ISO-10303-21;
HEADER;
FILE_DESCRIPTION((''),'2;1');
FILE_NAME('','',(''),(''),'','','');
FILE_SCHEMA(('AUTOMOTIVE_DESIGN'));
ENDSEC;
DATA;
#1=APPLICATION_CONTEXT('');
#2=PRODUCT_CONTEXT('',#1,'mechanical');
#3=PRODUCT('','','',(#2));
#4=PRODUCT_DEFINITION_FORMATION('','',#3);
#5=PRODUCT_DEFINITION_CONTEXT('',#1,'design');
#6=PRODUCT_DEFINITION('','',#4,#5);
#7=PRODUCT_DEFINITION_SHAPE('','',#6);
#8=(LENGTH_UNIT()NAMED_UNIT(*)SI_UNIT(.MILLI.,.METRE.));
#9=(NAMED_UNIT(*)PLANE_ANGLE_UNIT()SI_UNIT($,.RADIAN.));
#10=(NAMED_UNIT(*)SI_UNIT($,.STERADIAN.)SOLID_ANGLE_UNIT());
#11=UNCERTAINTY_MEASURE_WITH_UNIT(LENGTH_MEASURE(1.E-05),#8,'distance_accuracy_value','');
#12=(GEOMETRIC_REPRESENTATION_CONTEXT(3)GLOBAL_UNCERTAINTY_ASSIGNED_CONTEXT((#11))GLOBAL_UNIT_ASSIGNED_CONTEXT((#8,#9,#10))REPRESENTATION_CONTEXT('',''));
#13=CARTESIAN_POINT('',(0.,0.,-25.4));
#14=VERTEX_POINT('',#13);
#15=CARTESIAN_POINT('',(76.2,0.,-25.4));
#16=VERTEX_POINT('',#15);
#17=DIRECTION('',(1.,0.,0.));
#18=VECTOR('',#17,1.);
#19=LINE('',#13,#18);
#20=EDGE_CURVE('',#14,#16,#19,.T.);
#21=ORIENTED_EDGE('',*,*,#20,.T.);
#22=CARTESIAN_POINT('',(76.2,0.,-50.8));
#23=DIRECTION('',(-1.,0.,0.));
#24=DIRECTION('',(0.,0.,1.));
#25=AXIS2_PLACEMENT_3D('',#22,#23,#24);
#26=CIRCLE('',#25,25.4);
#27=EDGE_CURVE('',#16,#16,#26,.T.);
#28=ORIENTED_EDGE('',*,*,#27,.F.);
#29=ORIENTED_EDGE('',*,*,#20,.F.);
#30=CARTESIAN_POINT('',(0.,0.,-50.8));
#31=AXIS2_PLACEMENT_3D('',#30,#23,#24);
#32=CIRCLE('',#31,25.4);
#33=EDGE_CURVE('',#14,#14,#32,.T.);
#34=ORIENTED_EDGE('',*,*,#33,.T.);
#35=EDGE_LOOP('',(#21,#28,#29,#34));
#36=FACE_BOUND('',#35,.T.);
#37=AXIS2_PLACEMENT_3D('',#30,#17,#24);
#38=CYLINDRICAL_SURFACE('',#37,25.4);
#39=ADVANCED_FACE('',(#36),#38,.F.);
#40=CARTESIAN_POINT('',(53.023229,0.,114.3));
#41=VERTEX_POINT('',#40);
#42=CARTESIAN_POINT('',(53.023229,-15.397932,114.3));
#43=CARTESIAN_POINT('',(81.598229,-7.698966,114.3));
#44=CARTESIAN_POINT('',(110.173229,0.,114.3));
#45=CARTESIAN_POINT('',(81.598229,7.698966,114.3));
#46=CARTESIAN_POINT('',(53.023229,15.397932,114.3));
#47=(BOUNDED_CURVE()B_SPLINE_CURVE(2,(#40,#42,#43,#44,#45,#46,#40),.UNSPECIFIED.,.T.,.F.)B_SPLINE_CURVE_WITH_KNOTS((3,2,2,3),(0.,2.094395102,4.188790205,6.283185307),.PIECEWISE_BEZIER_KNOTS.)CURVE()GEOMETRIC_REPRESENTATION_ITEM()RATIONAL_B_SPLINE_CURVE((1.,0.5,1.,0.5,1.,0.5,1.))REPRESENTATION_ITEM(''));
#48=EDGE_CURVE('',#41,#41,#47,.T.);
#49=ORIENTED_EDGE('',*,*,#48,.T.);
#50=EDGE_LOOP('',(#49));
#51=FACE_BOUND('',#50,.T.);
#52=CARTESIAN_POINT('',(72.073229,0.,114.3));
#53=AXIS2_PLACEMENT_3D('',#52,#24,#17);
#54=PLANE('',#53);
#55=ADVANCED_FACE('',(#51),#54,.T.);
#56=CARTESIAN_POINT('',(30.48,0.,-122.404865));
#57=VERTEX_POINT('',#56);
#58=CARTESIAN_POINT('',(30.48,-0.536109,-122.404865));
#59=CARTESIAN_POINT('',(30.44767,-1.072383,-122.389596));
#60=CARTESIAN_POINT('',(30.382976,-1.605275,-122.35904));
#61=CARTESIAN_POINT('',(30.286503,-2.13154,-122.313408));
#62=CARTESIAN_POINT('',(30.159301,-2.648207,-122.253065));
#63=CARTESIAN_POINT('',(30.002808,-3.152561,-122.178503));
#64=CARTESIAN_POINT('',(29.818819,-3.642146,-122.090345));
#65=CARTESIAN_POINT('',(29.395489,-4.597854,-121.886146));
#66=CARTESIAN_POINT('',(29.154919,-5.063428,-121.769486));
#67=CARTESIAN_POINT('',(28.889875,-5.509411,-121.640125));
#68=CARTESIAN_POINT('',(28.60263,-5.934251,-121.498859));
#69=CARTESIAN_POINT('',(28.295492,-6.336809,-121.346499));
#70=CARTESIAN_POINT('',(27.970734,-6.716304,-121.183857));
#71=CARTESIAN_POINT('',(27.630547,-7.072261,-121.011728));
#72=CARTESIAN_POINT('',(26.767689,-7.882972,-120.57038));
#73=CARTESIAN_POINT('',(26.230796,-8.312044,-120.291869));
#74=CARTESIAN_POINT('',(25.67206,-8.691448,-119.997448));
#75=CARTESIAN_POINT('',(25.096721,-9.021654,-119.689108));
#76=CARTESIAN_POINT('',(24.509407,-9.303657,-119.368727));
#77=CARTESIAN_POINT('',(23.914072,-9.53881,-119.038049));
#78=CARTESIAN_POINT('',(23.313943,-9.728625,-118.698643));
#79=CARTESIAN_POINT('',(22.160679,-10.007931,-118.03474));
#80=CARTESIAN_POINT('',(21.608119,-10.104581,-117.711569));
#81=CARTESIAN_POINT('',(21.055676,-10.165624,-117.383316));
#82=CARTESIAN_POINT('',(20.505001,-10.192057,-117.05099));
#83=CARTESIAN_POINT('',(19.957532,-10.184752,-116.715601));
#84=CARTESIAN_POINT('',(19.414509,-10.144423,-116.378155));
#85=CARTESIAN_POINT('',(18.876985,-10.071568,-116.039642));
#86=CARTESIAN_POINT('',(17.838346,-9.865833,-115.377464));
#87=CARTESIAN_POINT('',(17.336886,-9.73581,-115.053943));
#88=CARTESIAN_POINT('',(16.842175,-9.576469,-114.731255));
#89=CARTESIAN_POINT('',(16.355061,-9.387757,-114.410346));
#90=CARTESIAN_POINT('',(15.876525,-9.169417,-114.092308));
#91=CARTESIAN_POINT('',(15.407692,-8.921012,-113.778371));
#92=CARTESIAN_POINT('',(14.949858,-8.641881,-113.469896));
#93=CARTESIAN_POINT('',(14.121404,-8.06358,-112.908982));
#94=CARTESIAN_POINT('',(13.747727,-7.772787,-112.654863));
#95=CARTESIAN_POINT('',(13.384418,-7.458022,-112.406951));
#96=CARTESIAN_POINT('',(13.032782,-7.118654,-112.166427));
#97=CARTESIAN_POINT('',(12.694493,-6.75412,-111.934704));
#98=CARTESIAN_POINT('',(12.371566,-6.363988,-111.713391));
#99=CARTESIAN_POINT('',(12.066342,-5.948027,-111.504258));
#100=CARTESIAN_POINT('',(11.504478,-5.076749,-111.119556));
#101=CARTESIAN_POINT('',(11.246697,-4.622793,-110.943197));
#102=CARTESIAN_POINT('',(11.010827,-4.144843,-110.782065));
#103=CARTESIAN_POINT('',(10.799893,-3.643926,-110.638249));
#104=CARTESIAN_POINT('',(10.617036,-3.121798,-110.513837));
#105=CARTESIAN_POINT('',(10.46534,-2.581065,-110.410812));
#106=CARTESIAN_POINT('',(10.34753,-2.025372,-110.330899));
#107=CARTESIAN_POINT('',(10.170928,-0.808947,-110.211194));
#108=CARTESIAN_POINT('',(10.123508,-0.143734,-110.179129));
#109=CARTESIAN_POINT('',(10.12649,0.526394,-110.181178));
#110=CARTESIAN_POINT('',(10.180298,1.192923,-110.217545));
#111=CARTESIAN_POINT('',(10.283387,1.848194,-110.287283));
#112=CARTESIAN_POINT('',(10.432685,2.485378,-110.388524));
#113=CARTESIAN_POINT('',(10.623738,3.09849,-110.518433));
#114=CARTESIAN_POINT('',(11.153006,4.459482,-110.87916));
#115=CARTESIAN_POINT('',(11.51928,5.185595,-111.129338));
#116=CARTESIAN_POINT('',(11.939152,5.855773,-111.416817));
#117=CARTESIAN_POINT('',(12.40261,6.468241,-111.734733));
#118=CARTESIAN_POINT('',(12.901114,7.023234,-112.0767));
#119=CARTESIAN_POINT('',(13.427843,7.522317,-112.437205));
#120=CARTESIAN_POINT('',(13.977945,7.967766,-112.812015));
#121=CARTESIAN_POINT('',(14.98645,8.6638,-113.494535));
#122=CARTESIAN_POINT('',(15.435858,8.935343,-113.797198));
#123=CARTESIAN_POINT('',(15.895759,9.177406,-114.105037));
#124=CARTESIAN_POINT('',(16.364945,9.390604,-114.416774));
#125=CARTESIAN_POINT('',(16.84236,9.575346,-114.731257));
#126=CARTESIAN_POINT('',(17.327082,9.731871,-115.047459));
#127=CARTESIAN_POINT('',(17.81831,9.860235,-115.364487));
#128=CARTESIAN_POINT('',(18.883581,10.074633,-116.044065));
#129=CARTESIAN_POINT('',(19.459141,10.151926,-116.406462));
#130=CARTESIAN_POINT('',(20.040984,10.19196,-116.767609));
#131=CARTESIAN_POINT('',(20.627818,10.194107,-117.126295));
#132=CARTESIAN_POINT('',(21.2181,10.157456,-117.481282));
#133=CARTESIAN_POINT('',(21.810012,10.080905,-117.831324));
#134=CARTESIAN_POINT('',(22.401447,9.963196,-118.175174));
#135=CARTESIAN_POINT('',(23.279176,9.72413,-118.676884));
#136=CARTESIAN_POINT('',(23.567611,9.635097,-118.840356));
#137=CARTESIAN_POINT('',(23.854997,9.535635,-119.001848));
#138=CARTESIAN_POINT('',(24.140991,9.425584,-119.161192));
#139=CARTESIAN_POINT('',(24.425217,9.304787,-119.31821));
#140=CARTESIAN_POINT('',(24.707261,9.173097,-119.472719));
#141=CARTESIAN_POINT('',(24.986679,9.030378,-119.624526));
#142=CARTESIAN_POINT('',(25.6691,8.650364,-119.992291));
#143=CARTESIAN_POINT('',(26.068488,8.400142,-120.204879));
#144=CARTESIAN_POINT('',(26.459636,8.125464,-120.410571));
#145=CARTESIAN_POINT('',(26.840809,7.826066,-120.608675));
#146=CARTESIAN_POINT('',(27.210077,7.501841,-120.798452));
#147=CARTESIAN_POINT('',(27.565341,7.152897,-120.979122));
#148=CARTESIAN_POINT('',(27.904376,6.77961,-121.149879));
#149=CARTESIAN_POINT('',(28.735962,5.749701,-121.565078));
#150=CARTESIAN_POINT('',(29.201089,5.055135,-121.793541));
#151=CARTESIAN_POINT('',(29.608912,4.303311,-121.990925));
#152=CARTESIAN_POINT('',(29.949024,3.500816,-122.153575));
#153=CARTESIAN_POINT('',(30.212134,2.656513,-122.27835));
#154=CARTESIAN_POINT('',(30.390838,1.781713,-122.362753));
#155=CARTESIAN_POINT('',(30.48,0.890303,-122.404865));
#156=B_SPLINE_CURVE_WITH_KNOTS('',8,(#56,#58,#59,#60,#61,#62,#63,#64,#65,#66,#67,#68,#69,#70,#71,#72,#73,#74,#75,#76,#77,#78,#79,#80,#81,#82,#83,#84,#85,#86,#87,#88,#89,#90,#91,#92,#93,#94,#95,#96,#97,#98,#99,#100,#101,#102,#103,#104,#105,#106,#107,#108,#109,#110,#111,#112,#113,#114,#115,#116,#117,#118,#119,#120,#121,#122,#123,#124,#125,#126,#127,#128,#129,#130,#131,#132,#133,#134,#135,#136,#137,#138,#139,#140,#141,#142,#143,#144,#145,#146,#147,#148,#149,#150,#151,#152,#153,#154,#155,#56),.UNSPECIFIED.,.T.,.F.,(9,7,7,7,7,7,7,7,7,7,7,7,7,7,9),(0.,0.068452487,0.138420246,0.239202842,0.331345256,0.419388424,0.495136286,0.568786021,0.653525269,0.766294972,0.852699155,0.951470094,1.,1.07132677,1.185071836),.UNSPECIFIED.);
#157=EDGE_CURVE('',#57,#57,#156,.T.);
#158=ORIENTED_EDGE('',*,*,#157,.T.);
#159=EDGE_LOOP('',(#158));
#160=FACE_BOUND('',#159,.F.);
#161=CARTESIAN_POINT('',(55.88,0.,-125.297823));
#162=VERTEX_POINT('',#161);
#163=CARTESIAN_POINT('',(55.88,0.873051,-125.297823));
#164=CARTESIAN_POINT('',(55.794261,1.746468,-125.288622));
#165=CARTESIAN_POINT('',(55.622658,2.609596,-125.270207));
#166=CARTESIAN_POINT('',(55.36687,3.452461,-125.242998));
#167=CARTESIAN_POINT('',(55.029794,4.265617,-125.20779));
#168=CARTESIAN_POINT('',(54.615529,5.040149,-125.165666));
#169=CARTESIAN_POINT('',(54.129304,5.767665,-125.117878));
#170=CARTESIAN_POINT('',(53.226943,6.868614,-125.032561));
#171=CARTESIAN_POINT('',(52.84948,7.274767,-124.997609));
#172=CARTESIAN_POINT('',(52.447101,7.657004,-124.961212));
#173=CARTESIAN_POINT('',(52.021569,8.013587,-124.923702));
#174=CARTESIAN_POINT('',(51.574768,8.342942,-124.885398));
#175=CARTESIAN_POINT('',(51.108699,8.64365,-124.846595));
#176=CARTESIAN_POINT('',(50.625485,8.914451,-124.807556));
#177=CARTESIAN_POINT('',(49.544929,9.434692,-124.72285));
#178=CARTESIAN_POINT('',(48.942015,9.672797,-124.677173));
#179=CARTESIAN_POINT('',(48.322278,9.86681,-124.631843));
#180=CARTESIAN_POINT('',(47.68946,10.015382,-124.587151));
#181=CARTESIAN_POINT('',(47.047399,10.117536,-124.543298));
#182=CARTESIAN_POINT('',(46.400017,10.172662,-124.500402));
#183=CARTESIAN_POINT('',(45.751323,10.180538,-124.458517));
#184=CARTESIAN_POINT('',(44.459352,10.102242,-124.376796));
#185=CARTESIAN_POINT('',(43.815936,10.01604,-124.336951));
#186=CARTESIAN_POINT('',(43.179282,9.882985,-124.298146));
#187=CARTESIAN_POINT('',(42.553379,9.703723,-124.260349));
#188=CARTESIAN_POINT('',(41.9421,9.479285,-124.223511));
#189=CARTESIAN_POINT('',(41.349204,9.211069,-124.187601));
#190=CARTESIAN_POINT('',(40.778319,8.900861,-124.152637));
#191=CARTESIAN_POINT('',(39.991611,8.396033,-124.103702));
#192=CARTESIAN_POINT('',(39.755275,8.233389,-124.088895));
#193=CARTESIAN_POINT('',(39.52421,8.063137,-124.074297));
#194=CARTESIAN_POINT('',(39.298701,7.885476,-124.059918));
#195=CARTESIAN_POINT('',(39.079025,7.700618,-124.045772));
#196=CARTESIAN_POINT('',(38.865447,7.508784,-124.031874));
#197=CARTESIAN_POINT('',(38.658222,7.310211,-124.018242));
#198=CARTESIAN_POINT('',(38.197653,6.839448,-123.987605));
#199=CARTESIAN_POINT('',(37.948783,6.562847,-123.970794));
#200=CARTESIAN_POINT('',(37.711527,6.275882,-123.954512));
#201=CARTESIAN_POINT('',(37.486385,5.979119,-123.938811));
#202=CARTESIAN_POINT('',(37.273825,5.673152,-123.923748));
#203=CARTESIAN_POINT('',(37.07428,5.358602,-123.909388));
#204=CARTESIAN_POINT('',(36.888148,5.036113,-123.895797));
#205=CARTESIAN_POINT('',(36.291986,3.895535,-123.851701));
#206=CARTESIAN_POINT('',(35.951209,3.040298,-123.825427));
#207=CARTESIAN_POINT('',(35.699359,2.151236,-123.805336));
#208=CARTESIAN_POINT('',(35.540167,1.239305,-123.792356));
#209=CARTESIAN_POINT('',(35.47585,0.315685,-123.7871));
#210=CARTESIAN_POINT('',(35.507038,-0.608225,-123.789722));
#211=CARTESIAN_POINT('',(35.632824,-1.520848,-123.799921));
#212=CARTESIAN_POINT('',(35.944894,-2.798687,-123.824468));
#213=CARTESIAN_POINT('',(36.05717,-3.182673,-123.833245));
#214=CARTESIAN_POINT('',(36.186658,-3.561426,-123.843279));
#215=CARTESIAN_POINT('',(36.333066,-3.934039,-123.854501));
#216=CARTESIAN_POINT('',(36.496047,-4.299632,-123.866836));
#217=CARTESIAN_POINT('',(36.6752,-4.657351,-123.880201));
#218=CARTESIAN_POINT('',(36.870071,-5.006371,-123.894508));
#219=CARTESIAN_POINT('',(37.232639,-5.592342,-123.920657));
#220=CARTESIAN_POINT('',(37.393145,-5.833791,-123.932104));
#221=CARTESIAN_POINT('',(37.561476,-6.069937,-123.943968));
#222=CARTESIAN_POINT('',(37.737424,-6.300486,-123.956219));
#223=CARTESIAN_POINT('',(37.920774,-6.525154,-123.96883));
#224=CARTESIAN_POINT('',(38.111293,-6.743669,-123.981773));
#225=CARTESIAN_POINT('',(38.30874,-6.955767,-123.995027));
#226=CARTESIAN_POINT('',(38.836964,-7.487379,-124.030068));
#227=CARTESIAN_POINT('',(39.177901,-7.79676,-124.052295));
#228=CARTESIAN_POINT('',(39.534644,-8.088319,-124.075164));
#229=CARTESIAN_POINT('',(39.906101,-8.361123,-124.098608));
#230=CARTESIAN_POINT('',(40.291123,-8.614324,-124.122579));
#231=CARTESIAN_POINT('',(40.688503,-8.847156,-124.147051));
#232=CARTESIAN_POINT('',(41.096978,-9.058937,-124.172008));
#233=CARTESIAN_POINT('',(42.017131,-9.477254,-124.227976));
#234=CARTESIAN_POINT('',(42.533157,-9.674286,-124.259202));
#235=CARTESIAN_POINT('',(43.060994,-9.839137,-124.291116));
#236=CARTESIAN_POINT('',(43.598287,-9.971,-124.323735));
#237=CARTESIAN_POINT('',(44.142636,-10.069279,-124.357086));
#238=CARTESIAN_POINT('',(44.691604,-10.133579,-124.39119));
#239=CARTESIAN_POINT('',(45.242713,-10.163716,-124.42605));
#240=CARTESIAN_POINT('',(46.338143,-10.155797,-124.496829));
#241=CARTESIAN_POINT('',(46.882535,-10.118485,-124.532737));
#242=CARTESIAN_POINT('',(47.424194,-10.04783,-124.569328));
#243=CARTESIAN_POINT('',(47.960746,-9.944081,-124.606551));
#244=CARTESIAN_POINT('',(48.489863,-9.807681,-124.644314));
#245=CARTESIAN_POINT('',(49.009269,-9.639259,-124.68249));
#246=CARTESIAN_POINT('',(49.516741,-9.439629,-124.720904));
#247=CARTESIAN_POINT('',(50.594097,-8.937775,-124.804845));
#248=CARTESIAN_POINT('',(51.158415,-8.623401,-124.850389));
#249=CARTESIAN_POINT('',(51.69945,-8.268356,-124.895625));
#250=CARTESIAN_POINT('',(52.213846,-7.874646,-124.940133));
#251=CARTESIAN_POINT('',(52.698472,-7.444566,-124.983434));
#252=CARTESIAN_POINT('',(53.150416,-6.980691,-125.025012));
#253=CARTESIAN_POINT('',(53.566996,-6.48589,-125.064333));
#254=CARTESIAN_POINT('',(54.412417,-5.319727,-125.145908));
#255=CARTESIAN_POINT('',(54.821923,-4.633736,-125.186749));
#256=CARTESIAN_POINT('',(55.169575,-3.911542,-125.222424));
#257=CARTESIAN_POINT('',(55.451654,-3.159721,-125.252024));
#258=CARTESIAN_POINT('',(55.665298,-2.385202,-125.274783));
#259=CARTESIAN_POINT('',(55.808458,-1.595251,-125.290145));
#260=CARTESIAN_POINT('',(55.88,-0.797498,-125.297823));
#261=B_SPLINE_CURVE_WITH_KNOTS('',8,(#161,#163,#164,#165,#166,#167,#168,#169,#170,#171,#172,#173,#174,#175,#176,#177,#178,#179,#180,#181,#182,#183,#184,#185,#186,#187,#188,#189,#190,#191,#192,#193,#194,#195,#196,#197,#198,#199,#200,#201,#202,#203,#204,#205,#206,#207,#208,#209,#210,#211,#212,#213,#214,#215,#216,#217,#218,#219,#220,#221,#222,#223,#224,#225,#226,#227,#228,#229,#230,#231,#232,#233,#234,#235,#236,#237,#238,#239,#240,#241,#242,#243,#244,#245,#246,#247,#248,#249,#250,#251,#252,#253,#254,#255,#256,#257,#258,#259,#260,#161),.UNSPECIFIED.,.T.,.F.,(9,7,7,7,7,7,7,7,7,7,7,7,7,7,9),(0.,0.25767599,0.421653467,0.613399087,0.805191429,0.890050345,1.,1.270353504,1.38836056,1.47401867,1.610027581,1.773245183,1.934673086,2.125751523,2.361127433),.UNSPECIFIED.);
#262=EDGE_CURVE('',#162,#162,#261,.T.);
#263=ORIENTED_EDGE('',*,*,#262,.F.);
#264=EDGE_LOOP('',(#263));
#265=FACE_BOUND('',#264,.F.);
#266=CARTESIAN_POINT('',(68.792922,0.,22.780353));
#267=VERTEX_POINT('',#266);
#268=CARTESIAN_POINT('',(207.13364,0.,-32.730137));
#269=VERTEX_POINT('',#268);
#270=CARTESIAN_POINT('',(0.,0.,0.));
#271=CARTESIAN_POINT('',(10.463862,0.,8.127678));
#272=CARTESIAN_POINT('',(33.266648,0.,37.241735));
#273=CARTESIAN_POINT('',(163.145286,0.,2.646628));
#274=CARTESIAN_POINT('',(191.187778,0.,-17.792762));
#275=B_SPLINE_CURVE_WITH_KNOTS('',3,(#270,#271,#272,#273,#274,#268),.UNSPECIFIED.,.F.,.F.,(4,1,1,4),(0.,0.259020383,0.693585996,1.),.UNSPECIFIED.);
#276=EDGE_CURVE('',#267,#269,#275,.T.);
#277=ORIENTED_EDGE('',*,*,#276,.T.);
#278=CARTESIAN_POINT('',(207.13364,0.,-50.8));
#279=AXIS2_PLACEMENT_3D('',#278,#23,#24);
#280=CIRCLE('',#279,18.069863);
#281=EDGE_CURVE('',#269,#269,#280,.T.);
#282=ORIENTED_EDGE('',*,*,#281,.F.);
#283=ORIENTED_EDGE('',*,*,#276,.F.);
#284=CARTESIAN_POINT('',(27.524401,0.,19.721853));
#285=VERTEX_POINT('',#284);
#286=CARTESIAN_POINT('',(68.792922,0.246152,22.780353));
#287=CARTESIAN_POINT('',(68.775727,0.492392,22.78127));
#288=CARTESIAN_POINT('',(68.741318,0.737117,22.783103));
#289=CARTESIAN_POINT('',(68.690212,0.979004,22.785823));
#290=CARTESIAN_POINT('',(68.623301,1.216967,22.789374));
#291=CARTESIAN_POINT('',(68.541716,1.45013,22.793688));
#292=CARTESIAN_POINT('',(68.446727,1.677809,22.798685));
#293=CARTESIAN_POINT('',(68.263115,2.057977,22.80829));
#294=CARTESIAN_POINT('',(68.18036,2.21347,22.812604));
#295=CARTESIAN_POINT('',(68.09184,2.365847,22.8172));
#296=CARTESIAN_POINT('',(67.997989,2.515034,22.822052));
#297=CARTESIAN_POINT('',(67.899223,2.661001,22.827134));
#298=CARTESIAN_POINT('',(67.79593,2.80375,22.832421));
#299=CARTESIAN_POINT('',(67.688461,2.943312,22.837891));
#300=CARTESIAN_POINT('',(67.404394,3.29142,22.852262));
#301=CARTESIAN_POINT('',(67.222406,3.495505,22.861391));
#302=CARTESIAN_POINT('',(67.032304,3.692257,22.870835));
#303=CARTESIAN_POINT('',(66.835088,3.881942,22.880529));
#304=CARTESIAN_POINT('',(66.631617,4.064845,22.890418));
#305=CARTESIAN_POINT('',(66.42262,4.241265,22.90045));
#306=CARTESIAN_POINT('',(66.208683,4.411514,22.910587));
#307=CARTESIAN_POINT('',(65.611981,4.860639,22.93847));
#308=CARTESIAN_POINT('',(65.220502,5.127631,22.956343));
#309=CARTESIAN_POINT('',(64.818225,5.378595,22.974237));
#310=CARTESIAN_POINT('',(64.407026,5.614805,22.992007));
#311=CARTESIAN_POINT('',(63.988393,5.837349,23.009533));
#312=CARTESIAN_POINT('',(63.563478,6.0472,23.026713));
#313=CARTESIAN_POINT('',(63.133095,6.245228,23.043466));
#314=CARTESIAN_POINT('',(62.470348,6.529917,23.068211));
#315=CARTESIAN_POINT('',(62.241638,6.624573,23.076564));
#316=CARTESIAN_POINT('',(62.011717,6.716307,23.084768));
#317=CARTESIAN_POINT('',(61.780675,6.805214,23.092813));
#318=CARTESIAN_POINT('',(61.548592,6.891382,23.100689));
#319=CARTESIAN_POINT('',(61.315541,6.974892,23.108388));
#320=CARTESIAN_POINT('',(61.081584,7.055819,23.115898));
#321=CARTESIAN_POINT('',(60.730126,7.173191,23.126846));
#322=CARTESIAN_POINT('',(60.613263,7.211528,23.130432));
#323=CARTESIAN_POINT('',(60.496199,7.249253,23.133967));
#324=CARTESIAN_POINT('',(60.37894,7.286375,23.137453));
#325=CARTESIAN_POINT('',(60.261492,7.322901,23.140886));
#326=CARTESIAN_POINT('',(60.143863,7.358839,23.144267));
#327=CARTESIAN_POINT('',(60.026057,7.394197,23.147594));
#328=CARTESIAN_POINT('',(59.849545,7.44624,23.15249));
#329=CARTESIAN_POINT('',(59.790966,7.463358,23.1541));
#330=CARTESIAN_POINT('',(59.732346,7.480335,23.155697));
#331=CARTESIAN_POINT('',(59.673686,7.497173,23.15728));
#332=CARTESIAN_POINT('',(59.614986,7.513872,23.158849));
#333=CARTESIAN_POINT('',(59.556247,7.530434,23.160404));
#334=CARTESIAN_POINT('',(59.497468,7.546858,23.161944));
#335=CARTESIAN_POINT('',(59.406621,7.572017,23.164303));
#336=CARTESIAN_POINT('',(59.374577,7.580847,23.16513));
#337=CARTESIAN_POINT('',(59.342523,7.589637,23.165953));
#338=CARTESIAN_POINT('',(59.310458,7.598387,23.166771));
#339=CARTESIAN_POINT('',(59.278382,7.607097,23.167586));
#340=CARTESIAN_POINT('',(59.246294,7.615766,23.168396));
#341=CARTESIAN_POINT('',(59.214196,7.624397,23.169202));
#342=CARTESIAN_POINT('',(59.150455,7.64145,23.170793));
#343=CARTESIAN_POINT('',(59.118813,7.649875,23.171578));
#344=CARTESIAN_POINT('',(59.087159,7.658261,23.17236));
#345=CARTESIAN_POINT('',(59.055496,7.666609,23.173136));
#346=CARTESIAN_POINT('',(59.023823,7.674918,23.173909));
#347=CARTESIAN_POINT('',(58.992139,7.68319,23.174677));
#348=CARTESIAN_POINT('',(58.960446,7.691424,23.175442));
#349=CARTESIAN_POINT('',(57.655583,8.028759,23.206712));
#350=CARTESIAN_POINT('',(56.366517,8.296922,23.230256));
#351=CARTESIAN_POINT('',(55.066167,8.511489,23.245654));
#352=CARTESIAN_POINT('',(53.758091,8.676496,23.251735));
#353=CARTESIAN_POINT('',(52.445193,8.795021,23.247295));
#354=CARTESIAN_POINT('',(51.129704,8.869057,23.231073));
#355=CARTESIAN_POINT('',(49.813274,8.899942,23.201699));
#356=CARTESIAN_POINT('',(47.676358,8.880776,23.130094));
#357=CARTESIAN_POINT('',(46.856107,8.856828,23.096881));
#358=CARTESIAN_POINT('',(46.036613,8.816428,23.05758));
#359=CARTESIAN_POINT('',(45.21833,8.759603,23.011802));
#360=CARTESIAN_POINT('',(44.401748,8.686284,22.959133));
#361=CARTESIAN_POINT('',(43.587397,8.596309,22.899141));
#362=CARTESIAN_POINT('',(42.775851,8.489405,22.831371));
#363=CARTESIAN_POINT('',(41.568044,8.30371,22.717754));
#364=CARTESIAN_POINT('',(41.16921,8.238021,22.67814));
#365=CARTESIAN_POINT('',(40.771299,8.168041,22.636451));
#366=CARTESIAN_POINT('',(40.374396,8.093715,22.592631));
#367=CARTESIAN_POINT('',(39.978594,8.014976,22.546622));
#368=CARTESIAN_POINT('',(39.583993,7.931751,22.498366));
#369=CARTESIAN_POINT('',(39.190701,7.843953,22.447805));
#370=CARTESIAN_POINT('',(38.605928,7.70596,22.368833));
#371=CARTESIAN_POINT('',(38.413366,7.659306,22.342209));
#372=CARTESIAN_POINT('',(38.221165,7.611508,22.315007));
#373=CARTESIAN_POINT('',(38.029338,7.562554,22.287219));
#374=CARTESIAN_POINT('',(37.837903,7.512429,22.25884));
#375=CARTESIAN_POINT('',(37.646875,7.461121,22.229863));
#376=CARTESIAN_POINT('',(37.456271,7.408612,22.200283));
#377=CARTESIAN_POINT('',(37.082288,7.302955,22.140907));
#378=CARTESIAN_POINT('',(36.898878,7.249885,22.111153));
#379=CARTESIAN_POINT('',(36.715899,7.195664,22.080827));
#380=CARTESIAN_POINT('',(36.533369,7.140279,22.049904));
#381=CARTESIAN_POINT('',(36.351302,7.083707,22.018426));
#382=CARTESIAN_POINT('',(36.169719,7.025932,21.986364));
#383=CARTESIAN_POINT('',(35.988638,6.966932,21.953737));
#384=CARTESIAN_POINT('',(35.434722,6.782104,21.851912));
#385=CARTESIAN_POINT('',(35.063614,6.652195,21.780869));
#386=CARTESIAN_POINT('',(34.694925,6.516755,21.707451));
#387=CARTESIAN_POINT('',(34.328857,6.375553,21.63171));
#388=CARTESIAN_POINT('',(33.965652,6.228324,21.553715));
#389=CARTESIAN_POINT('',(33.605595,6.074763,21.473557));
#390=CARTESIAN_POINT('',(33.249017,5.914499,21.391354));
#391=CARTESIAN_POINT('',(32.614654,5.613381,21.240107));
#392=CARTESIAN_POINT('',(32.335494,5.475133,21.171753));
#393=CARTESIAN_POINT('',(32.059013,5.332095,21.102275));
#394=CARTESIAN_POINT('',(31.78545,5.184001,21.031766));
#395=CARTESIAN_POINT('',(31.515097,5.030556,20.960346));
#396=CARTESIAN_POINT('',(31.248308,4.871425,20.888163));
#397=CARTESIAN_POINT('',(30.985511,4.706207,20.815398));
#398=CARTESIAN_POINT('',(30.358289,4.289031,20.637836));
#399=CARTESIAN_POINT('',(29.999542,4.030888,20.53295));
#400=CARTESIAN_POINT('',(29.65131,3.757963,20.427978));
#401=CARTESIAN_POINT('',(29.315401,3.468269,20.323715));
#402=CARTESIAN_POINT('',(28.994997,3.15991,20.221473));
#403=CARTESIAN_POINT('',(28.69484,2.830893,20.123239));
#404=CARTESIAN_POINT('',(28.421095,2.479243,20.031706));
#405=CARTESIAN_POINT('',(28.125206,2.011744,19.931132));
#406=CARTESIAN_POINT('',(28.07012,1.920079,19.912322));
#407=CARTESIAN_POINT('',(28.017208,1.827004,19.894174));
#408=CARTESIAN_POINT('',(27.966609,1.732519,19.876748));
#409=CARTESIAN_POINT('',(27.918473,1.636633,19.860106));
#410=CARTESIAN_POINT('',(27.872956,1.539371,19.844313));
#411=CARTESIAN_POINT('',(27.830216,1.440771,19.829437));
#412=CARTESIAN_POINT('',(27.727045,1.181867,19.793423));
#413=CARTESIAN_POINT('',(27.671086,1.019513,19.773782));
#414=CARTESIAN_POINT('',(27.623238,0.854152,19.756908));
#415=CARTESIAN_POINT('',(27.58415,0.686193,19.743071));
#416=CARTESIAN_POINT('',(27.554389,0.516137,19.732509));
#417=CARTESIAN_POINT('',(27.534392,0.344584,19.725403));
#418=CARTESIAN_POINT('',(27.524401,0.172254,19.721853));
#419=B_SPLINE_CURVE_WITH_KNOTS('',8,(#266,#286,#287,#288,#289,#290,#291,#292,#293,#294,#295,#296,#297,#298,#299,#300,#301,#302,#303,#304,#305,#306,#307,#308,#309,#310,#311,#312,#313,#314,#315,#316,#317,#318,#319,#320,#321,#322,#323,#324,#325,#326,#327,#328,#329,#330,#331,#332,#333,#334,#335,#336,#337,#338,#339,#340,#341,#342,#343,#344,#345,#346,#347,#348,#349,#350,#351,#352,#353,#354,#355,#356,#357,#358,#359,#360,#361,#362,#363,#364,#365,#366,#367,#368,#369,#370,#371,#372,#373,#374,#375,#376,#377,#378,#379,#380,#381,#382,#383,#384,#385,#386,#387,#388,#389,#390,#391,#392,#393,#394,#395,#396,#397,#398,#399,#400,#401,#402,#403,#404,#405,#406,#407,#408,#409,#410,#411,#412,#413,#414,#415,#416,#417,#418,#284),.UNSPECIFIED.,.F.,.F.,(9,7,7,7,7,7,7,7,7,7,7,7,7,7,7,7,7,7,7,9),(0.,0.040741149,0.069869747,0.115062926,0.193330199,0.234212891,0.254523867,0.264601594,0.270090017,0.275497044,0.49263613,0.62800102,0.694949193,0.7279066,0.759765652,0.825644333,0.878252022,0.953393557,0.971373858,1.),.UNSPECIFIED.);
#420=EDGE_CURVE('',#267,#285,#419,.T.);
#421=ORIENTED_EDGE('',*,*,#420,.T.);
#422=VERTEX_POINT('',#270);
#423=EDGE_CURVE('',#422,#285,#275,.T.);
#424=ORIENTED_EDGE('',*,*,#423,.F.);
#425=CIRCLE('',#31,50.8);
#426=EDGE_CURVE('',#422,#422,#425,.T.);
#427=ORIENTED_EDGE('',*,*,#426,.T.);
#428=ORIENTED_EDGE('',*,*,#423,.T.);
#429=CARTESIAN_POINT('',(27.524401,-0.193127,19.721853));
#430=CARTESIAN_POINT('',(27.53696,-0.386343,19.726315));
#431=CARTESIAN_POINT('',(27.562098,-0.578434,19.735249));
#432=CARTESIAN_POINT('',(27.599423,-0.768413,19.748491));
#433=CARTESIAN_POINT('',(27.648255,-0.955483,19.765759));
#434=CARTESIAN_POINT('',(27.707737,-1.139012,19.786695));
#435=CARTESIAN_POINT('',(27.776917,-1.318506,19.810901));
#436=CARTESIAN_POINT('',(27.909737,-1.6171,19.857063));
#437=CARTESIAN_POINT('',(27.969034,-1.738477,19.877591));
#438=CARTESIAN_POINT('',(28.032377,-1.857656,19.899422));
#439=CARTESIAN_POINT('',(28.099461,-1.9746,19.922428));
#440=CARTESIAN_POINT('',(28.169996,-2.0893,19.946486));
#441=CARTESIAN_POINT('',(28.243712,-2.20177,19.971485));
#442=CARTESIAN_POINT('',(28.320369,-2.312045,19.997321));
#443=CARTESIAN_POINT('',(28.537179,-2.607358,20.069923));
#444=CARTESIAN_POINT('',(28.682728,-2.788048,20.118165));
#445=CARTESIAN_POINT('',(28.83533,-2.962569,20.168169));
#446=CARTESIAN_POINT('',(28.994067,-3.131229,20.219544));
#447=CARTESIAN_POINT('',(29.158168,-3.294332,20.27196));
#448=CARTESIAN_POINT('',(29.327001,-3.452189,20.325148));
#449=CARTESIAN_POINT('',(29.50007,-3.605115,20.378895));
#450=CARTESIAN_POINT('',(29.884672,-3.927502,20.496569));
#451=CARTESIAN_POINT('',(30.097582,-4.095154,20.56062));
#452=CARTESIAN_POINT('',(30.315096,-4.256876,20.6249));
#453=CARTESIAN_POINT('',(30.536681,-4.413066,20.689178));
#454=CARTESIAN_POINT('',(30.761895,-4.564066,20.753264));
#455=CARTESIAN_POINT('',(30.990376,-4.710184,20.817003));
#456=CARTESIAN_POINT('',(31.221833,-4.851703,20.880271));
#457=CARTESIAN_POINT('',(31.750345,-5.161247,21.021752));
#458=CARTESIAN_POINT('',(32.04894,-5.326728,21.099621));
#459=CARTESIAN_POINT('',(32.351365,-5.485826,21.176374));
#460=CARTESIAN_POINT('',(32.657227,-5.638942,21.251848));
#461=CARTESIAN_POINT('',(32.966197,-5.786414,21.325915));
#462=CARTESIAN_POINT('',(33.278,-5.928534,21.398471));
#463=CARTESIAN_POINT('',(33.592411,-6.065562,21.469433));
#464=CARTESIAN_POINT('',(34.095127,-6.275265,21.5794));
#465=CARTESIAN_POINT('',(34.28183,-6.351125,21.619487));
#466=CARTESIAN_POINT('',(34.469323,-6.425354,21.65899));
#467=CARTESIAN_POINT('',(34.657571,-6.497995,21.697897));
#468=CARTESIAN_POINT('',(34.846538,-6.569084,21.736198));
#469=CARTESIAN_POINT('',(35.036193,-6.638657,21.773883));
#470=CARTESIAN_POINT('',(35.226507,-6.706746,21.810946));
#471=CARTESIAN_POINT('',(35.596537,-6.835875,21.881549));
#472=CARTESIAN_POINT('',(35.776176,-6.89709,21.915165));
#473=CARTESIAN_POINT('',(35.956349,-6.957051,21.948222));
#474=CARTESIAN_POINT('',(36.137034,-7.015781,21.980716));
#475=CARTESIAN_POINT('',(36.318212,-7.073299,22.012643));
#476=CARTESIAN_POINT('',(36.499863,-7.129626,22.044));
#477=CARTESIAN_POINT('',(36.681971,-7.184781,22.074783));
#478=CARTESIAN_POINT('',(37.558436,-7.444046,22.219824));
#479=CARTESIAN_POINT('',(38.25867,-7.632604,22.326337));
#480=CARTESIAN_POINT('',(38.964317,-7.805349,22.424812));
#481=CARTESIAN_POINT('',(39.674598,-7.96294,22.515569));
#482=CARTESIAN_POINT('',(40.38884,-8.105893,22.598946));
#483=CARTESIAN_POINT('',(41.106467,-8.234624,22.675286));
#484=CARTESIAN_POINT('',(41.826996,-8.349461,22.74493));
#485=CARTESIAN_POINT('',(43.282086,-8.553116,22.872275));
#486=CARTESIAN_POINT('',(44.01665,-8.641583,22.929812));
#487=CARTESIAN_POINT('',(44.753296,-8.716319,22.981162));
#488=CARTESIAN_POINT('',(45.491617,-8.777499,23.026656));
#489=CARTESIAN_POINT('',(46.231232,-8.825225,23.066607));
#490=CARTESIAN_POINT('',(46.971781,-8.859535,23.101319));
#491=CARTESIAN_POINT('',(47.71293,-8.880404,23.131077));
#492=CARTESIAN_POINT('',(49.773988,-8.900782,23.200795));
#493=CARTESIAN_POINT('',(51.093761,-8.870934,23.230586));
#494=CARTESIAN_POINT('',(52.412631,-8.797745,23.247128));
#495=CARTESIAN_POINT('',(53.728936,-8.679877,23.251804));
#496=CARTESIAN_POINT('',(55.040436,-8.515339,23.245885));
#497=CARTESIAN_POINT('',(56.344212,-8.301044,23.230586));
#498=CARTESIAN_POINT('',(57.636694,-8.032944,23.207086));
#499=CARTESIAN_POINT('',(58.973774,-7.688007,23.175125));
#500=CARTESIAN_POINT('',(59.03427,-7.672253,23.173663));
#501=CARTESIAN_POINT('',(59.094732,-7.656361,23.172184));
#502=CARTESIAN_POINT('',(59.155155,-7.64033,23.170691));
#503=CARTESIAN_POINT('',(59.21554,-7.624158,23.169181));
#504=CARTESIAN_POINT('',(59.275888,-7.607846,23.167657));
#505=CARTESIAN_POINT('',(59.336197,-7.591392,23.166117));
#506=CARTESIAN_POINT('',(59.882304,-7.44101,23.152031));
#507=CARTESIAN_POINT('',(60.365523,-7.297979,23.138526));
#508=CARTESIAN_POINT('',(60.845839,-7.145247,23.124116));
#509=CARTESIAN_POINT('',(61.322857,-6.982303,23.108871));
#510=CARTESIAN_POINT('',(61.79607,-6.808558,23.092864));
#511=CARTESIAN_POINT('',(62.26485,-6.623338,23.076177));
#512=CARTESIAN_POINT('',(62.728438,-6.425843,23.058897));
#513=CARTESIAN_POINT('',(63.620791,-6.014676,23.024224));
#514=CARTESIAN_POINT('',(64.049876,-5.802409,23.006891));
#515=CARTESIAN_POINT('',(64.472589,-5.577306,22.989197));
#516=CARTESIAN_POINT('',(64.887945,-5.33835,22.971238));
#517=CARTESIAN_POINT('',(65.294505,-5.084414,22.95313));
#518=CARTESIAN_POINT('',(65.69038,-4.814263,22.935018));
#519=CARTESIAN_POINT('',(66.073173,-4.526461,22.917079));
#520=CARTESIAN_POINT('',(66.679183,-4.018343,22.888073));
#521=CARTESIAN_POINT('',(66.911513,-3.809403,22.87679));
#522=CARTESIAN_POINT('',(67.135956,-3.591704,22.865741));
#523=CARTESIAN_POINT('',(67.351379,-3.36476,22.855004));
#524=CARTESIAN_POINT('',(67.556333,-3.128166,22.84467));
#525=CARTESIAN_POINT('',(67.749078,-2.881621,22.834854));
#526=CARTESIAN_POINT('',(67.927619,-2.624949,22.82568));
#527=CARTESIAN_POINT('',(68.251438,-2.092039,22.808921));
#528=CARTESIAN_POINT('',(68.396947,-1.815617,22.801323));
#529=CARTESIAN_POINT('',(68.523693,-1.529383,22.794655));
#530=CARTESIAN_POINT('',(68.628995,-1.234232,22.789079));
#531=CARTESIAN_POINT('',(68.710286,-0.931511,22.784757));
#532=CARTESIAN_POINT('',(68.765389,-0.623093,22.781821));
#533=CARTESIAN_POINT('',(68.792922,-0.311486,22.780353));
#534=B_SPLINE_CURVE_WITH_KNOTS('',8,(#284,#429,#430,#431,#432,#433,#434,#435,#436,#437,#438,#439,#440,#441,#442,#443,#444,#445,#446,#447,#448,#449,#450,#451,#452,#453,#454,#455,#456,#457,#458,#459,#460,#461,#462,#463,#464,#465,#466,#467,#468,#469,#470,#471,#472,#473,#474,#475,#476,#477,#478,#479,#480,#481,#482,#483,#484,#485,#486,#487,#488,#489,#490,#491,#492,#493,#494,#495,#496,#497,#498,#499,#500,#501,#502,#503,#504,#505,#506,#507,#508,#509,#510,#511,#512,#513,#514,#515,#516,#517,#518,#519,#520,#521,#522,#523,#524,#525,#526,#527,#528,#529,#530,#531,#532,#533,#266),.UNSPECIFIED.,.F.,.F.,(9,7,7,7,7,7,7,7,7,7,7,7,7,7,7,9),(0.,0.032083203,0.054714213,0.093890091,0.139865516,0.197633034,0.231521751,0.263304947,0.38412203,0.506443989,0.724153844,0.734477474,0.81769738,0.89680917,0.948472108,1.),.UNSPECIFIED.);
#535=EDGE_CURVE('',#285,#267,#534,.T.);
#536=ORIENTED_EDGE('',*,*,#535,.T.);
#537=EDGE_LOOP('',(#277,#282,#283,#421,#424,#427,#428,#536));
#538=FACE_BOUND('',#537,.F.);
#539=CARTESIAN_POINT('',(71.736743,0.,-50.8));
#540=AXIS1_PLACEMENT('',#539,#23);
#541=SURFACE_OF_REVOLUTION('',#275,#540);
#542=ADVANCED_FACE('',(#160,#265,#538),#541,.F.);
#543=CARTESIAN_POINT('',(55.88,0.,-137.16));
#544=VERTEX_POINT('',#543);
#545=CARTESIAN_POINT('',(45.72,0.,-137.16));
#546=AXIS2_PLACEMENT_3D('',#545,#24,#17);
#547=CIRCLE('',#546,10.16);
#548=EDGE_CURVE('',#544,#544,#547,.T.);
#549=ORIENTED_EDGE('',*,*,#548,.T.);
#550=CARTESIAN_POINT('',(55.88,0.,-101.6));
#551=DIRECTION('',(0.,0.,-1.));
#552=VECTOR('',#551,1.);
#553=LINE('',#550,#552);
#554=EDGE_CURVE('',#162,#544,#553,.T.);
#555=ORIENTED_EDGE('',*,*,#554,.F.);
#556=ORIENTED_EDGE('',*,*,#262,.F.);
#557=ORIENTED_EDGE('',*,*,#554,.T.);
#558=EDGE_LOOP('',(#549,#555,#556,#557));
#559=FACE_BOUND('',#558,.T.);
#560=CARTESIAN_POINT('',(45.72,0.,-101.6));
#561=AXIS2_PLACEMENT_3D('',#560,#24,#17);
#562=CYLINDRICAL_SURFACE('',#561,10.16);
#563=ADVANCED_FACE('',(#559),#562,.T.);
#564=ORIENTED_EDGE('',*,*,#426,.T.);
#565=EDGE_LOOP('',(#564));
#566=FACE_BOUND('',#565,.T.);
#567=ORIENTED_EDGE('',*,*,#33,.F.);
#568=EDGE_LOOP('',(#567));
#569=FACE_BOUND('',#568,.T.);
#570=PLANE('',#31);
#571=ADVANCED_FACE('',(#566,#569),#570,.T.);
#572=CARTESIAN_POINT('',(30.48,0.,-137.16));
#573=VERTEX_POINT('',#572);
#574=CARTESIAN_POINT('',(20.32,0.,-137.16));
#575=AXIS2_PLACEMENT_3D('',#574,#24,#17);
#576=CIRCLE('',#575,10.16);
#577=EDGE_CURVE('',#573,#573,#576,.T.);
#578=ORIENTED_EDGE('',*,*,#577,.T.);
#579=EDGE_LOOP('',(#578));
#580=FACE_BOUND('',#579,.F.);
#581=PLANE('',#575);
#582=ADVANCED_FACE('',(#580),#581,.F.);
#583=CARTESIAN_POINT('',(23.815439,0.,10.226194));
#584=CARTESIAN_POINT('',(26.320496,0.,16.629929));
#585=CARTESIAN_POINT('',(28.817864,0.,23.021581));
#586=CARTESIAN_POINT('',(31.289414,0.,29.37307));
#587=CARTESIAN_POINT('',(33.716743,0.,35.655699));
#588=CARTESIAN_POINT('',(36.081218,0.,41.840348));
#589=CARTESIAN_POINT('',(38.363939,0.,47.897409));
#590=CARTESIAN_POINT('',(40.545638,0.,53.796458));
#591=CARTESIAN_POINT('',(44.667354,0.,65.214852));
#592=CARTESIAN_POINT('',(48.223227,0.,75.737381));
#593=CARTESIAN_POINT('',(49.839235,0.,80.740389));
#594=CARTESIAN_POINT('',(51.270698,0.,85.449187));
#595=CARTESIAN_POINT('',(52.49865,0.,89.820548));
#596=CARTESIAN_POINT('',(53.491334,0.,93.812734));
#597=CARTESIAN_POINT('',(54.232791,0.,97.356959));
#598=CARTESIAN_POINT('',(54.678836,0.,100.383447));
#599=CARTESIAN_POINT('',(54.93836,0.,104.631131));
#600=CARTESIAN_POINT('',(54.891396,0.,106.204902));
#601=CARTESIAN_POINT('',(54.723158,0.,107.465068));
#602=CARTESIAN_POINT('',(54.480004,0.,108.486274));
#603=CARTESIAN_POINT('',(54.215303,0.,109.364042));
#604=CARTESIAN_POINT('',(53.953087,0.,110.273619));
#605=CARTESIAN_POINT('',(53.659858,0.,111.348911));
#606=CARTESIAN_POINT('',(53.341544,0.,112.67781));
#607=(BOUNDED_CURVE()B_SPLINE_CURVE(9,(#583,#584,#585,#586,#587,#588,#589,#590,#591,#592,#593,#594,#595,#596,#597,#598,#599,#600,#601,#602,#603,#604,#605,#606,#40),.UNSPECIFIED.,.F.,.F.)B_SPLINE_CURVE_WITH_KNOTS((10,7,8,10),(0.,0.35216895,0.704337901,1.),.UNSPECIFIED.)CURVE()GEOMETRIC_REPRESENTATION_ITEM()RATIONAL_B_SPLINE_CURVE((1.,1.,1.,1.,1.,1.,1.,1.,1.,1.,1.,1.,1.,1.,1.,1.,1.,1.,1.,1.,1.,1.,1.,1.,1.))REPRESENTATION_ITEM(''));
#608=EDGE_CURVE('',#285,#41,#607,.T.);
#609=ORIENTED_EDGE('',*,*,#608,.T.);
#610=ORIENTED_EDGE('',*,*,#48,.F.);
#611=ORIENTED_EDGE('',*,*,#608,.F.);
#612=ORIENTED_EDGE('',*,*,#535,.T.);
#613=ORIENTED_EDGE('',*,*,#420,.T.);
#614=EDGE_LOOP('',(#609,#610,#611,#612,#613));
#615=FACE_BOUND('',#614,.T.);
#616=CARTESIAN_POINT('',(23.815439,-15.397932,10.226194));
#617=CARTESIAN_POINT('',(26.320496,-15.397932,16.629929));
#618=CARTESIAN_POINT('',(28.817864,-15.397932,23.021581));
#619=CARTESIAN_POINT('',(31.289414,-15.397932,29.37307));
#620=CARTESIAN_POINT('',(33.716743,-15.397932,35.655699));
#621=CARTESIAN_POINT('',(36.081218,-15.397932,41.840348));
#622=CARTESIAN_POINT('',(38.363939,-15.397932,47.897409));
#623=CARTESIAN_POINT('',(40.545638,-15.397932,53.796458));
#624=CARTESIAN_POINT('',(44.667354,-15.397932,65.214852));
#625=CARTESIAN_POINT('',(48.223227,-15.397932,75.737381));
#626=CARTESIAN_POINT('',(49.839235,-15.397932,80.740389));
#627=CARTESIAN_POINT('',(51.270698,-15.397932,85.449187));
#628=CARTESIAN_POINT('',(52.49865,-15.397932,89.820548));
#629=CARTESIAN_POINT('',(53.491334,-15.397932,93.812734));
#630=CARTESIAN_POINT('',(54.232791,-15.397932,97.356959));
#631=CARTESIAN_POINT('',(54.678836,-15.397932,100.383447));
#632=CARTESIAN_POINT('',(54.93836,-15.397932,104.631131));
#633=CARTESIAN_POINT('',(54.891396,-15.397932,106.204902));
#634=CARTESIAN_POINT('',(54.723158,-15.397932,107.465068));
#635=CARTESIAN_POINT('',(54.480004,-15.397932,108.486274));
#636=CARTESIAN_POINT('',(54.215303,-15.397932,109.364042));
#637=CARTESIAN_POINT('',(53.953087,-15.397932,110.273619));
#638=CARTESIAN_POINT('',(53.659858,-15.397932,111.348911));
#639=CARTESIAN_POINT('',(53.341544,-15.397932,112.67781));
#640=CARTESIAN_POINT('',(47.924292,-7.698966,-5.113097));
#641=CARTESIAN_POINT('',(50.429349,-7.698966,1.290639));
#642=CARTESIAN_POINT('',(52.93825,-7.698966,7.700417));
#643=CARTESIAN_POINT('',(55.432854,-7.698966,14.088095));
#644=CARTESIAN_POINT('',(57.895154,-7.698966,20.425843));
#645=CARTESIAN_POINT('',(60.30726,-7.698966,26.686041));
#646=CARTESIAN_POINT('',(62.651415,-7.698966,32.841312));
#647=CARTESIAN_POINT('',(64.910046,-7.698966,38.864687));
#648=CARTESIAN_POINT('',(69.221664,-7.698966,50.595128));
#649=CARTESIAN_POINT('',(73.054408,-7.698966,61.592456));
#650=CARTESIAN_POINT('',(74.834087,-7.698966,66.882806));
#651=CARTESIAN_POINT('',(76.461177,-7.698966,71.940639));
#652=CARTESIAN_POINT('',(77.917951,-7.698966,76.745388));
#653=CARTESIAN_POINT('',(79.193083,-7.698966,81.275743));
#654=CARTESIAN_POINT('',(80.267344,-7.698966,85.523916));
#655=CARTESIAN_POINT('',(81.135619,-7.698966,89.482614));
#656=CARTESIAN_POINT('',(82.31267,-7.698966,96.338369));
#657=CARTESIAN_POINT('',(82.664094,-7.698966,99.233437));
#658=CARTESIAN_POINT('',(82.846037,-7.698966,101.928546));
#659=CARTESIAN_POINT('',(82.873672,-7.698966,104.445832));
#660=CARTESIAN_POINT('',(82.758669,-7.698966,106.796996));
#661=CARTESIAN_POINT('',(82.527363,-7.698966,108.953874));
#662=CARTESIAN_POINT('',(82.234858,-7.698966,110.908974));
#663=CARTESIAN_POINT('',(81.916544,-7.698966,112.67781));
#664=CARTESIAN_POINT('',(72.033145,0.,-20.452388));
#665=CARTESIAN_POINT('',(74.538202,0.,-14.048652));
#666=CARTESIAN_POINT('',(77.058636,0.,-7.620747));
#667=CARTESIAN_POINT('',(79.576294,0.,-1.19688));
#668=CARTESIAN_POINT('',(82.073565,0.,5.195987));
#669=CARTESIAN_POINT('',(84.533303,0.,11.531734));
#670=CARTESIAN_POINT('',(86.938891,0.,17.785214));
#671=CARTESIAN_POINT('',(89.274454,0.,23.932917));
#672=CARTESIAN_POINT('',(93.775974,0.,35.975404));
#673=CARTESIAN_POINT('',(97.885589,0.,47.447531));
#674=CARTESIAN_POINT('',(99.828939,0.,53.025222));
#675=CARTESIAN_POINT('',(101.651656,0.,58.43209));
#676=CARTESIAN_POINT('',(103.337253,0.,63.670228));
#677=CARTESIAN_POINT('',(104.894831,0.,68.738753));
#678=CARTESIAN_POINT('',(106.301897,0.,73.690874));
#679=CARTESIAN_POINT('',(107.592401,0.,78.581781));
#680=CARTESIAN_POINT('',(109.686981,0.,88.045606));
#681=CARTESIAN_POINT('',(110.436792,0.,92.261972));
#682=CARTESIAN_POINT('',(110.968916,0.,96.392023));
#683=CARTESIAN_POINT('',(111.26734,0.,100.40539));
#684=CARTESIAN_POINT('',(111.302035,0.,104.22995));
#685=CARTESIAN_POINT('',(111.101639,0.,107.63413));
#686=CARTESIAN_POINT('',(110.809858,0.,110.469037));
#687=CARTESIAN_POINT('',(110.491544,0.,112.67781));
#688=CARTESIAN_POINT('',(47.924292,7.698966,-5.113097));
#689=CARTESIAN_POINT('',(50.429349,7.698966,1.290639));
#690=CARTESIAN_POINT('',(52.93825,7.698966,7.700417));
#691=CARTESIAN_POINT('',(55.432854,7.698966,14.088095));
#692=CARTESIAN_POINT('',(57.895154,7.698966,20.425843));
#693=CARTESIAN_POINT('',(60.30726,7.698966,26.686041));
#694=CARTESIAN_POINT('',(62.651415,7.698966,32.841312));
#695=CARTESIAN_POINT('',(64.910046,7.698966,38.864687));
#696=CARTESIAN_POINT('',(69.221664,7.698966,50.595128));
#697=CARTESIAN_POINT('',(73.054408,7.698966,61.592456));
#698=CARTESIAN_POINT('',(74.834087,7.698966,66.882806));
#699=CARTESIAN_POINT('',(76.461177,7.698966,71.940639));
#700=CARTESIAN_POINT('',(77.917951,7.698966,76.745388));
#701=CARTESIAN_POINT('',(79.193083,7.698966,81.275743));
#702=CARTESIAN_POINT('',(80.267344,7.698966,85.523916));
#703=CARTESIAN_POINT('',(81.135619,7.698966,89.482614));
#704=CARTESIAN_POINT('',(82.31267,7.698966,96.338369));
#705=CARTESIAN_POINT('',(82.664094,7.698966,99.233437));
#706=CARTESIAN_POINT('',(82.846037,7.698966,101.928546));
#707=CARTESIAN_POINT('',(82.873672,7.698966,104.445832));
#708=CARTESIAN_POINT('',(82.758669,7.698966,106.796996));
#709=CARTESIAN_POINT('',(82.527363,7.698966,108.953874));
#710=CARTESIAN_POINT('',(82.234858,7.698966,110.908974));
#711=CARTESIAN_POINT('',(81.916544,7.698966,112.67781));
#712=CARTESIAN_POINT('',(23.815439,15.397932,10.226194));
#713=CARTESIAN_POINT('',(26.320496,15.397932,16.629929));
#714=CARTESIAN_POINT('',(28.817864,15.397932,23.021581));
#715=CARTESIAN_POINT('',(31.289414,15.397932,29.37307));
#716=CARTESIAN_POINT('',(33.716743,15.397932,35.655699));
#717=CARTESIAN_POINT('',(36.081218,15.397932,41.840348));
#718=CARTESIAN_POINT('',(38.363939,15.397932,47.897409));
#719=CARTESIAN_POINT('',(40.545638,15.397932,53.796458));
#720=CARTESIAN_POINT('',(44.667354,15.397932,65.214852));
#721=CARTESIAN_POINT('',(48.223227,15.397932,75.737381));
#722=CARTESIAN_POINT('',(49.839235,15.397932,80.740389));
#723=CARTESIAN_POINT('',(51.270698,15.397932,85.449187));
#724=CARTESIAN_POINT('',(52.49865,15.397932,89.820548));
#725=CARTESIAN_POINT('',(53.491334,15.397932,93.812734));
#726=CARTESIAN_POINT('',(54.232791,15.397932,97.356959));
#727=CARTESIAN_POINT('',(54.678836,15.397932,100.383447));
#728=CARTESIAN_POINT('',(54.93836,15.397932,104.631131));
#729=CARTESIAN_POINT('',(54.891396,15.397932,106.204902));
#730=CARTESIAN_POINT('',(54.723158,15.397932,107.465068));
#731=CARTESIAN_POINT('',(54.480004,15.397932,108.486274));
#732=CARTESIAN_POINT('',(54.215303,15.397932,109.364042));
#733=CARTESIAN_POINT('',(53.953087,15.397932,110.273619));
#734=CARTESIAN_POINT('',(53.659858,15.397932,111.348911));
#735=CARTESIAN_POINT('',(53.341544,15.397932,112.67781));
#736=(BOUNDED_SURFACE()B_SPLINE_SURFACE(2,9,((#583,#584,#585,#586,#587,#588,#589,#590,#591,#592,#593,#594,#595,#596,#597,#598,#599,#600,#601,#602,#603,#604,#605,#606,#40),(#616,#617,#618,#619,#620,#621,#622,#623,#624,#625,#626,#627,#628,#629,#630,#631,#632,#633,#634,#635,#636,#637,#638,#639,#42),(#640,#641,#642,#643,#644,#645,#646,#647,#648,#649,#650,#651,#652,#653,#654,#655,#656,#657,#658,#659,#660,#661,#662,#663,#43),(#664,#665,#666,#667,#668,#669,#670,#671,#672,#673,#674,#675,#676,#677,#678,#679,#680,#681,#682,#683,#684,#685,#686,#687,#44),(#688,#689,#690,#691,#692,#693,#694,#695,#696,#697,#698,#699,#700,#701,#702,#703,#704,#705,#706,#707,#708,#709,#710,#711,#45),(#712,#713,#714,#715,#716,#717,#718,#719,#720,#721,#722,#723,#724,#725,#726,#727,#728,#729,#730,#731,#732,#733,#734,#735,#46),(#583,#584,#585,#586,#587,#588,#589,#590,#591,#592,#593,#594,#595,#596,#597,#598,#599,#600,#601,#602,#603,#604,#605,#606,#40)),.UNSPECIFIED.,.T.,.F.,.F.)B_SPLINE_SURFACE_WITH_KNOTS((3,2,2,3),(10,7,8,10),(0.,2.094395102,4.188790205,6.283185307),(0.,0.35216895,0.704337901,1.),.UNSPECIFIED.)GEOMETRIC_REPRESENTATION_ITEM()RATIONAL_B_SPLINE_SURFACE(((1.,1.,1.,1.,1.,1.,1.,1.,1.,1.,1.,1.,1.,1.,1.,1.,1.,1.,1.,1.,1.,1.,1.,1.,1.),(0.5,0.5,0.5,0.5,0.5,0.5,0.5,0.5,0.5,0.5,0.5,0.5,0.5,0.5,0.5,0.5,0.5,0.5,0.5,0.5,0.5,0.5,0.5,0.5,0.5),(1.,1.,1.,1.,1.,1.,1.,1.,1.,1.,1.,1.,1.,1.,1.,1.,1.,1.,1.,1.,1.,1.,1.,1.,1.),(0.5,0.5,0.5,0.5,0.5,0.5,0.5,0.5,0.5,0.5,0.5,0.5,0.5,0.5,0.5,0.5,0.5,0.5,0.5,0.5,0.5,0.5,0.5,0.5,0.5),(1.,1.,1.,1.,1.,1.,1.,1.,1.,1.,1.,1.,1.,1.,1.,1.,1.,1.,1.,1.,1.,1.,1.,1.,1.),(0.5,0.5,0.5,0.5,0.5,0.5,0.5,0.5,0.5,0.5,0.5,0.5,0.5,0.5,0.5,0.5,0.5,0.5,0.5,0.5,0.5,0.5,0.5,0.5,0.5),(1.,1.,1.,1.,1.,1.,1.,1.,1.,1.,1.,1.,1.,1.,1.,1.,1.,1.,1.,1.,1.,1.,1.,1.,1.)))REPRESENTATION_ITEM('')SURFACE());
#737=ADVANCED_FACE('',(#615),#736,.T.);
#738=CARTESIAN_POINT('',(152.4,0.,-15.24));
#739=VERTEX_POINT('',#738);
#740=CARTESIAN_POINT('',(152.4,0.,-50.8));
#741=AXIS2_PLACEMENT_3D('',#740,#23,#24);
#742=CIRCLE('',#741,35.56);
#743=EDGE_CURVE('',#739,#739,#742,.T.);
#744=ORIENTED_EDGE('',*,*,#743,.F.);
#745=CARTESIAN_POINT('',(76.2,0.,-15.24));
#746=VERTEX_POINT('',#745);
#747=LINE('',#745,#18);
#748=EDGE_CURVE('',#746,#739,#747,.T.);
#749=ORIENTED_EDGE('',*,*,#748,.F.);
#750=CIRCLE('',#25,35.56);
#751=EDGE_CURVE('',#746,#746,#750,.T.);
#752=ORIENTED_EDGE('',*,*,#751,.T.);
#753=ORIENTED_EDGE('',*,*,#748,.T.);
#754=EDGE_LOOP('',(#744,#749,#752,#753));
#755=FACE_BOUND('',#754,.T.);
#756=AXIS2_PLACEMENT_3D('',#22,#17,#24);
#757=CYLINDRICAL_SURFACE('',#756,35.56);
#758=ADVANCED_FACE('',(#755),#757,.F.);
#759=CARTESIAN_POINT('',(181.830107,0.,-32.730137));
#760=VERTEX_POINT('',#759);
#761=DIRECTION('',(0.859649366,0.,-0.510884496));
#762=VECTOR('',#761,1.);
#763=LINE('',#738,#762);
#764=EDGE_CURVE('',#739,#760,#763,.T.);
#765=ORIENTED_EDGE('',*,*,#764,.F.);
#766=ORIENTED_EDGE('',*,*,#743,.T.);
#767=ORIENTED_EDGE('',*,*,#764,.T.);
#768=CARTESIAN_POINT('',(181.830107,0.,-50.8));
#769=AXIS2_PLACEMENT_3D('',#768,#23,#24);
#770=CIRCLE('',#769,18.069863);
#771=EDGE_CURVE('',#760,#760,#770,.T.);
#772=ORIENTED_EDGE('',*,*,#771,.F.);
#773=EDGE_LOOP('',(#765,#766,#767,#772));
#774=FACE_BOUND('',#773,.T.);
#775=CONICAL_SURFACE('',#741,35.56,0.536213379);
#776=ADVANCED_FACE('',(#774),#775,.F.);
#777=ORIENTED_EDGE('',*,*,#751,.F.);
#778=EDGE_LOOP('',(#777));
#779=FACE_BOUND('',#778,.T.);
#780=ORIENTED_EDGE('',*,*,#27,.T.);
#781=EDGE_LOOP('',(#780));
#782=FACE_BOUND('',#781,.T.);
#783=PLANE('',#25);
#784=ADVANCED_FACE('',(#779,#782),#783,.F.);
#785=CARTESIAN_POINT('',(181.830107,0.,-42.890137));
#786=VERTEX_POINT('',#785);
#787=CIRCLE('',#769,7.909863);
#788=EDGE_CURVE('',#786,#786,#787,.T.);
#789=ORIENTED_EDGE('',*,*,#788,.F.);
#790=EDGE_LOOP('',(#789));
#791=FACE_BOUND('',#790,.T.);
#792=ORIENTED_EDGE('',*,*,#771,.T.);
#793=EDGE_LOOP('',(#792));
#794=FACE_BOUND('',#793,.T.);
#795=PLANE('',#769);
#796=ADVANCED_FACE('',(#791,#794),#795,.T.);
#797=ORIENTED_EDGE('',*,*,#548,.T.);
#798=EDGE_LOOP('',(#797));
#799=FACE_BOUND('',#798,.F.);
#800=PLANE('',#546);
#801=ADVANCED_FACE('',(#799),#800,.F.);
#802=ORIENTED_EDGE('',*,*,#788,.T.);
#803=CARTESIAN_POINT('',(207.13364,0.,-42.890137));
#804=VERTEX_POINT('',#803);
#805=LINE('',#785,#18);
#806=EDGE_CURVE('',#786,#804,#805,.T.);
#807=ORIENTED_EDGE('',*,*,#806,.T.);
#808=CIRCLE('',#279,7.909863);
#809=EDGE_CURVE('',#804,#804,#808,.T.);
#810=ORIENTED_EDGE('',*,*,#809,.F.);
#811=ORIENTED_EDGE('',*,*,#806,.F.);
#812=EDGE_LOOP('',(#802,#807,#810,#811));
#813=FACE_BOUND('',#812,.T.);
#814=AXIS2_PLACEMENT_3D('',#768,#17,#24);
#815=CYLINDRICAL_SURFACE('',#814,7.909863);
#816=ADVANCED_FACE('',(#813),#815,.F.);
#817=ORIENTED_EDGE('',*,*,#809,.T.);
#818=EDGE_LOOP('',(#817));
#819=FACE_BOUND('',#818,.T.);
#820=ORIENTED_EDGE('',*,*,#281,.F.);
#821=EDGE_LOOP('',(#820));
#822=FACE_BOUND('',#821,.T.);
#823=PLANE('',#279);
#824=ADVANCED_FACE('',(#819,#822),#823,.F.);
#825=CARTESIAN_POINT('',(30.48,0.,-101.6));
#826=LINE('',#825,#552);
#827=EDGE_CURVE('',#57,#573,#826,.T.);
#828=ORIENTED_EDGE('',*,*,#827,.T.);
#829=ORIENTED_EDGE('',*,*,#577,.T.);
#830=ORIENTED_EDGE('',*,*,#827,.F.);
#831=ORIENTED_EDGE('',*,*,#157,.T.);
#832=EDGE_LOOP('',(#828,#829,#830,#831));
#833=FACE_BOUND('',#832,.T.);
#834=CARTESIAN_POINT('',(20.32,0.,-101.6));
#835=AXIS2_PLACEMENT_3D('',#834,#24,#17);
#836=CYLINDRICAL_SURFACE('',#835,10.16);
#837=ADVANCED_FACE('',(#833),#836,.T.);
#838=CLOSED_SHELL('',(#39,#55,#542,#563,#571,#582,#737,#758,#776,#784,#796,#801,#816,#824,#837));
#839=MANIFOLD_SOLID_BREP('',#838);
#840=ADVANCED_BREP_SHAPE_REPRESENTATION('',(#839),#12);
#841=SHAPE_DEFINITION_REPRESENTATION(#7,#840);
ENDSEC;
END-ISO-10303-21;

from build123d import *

# Parameters (mm, degrees)
F3_R     = 10.16
F4_DEPTH = 35.56


# Not quite as in the source:
# - a feature names something its author has since deleted; it is built from what else it names


with BuildPart() as f1:
    # F0 (on Front) → F1 (revolve)
    with BuildSketch(Plane.XZ):
        with BuildLine():
            Line((207.1336402178, -42.8901373174), (207.1336402178, -32.7301373174))
            add(Edge.make_bspline(
                [(0, 0), (10.4638618624, 8.1276784662), (33.2666475246, 37.2417350062), (163.1452860385, 2.6466282002), (191.1877777142, -17.7927619281), (207.1336402178, -32.7301373174)],
                knots=[0, 0, 0, 0, 0.2590203832, 0.6935859965, 1, 1, 1, 1], degree=3))
            Line((0, 0), (0, -25.4))
            Line((0, -25.4), (76.2, -25.4))
            Line((76.2, -25.4), (76.2, -15.24))
            Line((76.2, -15.24), (152.4, -15.24))
            Line((152.4, -15.24), (181.8301071367, -32.7301373174))
            Line((181.8301071367, -32.7301373174), (181.8301071367, -42.8901373174))
            Line((181.8301071367, -42.8901373174), (207.1336402178, -42.8901373174))
        make_face()
    revolve(axis=Axis((71.7367434391, 0, -50.8), (-1, 0, 0)))

    # F3 (on offset) → F4 (join)
    with BuildSketch(Plane.XY.offset(-101.6)):
        with Locations((20.32, 0)):
            Circle(F3_R)
        with Locations((45.72, 0)):
            Circle(F3_R)
    extrude(amount=-F4_DEPTH)

    # F8: sweep along a path in F5
    with BuildLine(Plane.XZ) as f8_path:
        add(Plane.XZ * Edge.make_bspline(
            [(39.8880077945, 0), (54.9183498543, 38.4224136512), (76.2580250899, 92.973522723), (73.0281734091, 109.4334294306), (72.0732286811, 114.3)],
            knots=[0, 0, 0, 0, 0.7043379008, 1, 1, 1, 1], degree=3))
    # F7 (on offset) → F8 (sweep)
    with BuildSketch(Plane.XY.offset(114.3)):
        with BuildLine():
            add(Edge.make_bspline(
                [(53.0232286811, 0), (53.0232286811, -15.3979316793), (81.5982286811, -7.6989658396), (110.1732286811, 0), (81.5982286811, 7.6989658396), (53.0232286811, 15.3979316793), (53.0232286811, 0)],
                knots=[0, 0, 0, 2.0943951024, 2.0943951024, 4.1887902048, 4.1887902048, 6.2831853072, 6.2831853072, 6.2831853072], degree=2, weights=[1, 0.5, 1, 0.5, 1, 0.5, 1]))
        make_face()
    sweep(path=f8_path.line)


solid = f1.part
